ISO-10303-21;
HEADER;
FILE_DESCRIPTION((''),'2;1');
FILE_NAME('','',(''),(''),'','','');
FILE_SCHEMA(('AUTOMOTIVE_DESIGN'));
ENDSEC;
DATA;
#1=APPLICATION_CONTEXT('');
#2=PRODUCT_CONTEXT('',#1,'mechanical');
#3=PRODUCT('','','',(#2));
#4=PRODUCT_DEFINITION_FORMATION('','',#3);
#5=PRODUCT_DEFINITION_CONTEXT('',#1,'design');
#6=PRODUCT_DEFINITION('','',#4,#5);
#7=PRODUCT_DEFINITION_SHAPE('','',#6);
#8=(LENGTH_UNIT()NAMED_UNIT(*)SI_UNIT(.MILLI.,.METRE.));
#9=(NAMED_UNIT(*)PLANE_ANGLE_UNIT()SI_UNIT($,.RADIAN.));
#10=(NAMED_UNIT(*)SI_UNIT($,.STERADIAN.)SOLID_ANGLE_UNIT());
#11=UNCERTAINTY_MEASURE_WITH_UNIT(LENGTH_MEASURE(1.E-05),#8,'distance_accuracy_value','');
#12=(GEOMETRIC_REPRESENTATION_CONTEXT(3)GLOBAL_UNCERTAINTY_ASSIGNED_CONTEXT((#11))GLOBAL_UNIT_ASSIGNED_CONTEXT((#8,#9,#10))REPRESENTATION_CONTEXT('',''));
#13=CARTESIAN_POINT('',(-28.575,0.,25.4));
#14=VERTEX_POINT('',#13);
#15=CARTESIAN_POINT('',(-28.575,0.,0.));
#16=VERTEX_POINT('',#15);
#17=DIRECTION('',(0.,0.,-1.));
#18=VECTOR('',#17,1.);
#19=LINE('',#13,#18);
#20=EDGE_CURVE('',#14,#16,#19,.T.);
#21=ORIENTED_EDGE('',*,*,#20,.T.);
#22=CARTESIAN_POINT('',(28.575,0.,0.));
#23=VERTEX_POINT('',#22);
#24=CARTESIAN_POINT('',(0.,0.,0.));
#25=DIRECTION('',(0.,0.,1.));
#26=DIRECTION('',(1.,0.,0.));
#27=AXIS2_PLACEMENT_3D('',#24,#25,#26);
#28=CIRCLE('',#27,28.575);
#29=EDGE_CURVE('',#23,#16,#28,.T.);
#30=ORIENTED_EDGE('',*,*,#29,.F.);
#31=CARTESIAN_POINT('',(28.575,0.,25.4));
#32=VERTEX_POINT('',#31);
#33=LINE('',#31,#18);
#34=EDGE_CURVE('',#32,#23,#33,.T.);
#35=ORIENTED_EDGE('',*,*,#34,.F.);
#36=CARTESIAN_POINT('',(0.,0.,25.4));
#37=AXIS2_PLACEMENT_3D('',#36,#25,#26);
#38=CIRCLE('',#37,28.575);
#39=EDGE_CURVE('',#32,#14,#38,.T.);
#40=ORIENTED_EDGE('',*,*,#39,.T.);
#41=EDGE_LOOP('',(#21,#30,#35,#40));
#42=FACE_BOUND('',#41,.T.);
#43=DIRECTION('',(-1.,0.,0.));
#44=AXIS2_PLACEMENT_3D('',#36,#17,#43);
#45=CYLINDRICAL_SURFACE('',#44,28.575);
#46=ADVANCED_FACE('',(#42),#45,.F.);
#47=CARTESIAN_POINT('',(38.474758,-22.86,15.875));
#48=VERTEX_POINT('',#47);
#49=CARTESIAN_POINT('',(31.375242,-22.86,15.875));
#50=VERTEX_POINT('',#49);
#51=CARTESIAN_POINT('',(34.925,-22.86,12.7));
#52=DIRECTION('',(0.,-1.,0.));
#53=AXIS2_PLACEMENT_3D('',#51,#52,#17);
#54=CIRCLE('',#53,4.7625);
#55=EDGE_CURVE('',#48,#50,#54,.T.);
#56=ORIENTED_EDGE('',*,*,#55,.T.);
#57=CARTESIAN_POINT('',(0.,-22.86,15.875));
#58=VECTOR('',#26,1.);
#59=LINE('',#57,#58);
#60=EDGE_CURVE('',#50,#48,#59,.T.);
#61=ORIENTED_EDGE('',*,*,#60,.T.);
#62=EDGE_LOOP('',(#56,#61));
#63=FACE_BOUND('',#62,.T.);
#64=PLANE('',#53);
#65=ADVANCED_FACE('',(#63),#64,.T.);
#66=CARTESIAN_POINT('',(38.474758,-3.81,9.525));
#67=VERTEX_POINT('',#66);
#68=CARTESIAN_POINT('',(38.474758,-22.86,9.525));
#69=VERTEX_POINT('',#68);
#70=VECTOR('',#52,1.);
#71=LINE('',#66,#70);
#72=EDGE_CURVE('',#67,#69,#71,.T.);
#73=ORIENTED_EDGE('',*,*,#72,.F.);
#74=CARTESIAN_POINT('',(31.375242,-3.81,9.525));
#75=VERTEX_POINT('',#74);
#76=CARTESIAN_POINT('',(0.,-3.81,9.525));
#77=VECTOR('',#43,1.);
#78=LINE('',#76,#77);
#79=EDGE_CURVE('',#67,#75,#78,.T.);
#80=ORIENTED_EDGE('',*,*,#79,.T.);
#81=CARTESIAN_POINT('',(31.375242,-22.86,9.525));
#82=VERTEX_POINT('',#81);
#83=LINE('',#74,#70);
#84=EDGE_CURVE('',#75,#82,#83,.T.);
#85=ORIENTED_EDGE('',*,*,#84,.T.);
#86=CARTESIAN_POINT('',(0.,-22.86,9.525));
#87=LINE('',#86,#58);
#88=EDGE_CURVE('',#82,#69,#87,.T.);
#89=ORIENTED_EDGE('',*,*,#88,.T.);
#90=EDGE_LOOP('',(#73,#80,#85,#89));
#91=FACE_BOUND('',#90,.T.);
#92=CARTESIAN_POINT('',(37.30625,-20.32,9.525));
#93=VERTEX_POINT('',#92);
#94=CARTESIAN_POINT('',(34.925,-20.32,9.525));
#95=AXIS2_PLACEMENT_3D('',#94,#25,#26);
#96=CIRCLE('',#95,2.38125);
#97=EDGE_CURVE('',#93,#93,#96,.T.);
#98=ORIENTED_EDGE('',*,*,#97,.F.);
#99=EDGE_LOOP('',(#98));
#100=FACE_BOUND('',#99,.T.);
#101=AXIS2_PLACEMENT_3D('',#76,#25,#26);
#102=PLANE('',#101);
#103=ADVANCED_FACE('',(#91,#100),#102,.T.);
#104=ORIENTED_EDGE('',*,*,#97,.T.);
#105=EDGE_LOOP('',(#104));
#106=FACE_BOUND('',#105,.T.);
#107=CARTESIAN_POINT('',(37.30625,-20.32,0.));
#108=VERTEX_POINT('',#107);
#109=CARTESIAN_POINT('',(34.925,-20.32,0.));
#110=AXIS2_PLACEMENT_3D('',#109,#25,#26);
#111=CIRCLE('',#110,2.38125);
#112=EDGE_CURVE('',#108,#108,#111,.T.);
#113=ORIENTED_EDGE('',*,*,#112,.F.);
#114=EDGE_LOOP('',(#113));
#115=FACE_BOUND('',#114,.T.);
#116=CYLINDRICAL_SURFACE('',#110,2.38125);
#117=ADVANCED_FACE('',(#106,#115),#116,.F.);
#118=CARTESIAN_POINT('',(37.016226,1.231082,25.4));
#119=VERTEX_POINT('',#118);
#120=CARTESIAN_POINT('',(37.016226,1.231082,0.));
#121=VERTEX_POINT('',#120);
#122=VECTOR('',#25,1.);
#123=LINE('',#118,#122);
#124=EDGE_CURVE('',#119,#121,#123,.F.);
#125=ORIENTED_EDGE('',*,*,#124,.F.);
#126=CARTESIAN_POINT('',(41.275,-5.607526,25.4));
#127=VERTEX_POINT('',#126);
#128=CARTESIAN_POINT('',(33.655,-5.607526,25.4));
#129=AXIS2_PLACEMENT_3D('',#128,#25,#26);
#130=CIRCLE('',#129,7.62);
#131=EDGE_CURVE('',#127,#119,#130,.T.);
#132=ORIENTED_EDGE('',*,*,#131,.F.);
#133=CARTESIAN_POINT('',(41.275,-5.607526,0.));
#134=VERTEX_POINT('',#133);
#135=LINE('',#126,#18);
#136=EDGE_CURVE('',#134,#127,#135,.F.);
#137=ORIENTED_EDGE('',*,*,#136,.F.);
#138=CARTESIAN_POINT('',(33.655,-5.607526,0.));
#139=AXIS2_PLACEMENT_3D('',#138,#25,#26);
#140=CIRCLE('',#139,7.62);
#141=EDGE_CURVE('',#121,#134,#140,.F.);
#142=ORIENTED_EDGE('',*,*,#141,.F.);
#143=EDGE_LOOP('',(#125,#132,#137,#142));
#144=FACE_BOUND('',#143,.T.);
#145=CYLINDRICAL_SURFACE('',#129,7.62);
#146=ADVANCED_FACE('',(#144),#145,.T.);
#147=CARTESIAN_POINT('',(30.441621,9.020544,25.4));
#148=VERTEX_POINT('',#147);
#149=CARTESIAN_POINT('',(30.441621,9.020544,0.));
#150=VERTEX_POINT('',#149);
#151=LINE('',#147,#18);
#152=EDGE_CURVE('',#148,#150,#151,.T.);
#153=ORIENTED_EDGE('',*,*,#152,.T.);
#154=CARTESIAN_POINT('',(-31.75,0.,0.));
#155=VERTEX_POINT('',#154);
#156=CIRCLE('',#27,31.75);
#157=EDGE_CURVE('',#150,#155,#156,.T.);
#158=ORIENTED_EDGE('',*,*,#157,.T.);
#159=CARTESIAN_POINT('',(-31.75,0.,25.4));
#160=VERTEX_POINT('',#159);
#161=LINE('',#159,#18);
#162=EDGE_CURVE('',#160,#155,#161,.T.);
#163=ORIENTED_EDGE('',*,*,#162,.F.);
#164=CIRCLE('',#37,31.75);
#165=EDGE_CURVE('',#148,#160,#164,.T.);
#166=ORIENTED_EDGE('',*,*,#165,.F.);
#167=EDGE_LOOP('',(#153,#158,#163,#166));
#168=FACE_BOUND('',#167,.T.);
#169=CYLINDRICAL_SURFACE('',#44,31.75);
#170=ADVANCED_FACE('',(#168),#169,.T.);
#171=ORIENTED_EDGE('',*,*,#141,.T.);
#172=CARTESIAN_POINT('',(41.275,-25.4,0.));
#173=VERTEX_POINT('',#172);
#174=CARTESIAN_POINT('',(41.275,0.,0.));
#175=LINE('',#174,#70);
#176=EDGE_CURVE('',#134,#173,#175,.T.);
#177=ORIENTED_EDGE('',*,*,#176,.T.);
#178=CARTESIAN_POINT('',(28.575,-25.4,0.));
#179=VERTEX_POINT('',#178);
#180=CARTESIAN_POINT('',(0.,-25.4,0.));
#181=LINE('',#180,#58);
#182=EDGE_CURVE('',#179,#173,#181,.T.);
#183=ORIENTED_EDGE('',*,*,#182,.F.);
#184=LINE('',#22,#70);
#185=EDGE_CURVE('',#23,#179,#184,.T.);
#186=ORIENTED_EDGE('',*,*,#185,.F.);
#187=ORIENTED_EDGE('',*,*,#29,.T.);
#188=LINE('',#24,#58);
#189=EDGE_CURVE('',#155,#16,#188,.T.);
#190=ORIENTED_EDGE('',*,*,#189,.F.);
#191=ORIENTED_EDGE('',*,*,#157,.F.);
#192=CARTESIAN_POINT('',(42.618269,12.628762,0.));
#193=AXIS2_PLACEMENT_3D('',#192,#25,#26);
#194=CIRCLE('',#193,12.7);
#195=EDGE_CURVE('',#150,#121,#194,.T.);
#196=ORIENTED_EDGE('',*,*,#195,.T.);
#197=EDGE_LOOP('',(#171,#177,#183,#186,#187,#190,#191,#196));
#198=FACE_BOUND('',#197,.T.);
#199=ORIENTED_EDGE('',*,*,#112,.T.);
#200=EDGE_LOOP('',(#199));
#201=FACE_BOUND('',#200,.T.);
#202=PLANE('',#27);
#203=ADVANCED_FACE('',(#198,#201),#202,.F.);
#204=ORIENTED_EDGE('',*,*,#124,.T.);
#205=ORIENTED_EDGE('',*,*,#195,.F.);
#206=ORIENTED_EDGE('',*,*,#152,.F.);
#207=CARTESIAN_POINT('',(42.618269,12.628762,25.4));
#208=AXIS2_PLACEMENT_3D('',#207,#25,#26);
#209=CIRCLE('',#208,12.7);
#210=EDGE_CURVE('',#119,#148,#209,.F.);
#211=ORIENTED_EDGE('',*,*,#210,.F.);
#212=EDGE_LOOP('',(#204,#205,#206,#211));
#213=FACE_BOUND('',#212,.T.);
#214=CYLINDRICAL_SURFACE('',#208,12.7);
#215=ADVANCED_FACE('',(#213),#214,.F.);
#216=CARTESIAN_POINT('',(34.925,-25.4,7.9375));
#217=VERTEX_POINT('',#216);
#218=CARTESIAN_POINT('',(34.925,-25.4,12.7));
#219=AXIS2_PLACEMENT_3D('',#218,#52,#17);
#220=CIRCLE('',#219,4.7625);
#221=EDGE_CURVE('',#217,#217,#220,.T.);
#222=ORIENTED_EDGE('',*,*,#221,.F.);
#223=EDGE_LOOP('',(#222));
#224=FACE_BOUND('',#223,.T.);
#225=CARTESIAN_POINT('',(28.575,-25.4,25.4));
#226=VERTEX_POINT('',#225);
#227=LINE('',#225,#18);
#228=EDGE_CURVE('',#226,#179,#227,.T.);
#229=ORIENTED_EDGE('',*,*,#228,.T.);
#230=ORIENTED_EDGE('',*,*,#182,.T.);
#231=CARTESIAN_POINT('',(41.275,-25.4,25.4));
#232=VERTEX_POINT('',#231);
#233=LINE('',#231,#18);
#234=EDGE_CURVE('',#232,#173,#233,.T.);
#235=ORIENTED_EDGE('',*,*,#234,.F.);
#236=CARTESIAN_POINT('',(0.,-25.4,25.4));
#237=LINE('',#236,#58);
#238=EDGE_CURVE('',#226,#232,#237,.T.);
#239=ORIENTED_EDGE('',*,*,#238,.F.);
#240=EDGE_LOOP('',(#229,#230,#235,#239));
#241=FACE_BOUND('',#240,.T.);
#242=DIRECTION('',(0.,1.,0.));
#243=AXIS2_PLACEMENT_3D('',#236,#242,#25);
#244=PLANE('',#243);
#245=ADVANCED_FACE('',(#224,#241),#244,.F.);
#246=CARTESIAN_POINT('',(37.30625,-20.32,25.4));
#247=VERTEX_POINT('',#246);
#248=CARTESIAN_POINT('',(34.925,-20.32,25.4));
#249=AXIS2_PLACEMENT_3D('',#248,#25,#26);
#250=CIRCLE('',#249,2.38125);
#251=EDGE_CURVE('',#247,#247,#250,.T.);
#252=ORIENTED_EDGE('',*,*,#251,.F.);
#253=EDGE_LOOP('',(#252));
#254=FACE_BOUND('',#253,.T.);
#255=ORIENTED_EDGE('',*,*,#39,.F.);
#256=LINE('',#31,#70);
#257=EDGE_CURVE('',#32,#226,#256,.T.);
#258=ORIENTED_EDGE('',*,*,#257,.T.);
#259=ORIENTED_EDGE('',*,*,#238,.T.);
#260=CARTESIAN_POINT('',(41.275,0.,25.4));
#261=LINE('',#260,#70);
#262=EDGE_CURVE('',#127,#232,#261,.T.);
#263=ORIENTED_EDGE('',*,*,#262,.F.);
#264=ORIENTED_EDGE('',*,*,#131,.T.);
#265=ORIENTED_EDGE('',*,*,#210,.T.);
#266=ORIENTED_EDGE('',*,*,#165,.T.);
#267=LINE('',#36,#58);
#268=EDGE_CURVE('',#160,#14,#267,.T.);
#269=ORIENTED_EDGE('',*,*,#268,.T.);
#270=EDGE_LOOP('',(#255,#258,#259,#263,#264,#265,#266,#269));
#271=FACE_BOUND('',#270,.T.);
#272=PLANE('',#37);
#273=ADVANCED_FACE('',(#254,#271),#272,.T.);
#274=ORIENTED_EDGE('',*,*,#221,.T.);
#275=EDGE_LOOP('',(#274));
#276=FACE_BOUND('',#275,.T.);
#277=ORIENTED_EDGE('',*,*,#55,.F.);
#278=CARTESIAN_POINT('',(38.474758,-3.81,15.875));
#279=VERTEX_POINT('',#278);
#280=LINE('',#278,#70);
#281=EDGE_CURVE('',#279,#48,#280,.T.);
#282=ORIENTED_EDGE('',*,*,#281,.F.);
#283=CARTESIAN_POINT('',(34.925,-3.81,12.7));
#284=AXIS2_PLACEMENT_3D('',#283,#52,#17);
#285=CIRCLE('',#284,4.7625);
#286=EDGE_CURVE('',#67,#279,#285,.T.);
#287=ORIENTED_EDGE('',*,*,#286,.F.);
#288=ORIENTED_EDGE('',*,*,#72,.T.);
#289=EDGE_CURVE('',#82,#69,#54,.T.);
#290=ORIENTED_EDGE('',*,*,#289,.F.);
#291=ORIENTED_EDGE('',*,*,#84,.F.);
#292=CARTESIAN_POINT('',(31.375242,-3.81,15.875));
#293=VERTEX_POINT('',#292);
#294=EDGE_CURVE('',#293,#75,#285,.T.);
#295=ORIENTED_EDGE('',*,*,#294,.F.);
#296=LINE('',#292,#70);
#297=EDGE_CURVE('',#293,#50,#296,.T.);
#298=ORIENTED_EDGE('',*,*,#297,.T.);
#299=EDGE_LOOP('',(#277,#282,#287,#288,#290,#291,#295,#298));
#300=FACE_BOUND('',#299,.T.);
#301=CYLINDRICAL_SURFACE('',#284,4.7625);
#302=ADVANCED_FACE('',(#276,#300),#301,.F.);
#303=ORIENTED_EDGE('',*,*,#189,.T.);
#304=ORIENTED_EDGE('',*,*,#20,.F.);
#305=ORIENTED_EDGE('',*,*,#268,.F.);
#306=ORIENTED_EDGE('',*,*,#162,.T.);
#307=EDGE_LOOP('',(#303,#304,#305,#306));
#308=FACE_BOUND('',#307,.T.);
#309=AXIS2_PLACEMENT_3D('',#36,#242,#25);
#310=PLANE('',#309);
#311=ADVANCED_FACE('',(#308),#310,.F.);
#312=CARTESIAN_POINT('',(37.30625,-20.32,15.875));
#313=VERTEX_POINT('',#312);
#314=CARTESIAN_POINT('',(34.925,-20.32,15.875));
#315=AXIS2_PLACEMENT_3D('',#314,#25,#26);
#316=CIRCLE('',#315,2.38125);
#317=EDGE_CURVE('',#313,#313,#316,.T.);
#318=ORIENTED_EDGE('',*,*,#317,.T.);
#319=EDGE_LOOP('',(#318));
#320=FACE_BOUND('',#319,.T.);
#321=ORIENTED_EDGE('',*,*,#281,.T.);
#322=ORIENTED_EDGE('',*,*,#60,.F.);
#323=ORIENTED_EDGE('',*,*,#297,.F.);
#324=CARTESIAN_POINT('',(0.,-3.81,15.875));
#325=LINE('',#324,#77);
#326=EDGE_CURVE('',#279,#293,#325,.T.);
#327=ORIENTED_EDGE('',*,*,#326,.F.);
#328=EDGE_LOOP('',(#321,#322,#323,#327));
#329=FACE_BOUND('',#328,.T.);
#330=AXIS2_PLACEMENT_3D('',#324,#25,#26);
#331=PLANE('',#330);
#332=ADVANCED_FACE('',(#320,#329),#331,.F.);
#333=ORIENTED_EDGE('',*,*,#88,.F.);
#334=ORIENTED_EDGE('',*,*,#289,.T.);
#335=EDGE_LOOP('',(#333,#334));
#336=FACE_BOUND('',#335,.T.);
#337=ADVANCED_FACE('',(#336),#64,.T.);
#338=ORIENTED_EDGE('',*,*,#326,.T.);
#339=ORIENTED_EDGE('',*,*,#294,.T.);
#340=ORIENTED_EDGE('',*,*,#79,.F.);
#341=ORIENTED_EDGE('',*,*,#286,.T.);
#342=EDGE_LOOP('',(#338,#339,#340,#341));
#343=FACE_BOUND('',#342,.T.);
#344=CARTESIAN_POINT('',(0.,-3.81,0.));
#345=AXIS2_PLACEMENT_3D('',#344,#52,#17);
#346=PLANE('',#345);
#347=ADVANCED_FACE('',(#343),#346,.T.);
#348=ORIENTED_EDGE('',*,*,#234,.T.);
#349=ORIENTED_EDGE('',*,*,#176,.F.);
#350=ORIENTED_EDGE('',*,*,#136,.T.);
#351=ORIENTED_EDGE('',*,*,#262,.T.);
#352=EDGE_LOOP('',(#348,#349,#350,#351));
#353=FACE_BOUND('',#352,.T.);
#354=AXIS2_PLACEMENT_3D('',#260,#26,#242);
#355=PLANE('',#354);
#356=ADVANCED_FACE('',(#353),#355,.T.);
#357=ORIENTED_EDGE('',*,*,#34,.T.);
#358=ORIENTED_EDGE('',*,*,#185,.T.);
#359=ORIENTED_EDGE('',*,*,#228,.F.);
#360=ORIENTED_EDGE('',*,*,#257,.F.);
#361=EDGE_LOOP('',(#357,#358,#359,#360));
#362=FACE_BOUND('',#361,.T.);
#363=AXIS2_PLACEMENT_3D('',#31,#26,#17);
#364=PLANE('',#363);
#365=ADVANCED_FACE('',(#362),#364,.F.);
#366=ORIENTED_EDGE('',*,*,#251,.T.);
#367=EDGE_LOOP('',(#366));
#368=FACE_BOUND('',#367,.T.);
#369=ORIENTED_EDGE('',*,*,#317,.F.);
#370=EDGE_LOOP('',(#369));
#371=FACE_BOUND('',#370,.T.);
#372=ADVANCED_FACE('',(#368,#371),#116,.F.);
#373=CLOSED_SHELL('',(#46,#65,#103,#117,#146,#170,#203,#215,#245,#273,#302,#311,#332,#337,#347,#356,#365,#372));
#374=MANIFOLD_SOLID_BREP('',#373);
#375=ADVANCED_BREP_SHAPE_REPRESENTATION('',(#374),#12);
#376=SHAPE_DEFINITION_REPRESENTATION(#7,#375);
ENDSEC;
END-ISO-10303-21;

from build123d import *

# Parameters (mm, degrees)
BOSS_EXTRUDE1_DEPTH = 25.4
FILLET1_R           = 12.7
FILLET2_R           = 7.62
CUT_EXTRUDE1_DEPTH  = 21.59
SKETCH3_R           = 4.7625
CUT_EXTRUDE2_DEPTH  = 2.54
SKETCH4_R           = 2.38125
CUT_EXTRUDE3_DEPTH  = 58.938313101


with BuildPart() as part:
    # Sketch1 → Boss-Extrude1 (new body)
    with BuildSketch(Plane.XY):
        with BuildLine():
            ThreePointArc((-28.575, 0), (0, 28.575), (28.575, 0))
            Line((28.575, 0), (28.575, -25.4))
            Line((28.575, -25.4), (41.275, -25.4))
            Line((41.275, -25.4), (41.275, 0))
            Line((41.275, 0), (31.75, 0))
            ThreePointArc((31.75, 0), (0, 31.75), (-31.75, 0))
            Line((-31.75, 0), (-28.575, 0))
        make_face()
    extrude(amount=BOSS_EXTRUDE1_DEPTH)

    # Fillet1
    # the kernel refuses this fillet: 12.7 mm, written as the material it adds along each edge
    with BuildSketch(Plane(origin=(31.75, 0, 0), x_dir=(1, 0, 0), z_dir=(0, 0, 1))) as fillet1_piece_1:
        with BuildLine():
            CenterArc((10.868269231, 12.628761926), FILLET1_R, 196.505753727, 67.422759238)
            Line((-1.308379121, 9.020544233), (-1.551912088, 8.948379879))
            ThreePointArc((-1.551912088, 8.948379879), (-0.580166885, 4.521008688), (-0.254, 0))
            Line((-0.254, 0), (0, -0.254))
            ThreePointArc((0, -0.254), (4.7625, -0.254), (9.498134615, -0.252575239))
            Line((9.498134615, -0.252575239), (9.525, 0))
        make_face()
    extrude(amount=25.4)

    # Fillet2
    fillet2_edges = [part.edges().sort_by_distance(p)[0] for p in [
        (41.275, 0, 12.7),
    ]]
    fillet(fillet2_edges, radius=FILLET2_R)

    # Sketch2 → Cut-Extrude1 (cut)
    with BuildSketch(Plane(origin=(0, -25.4, 0), x_dir=(-1, 0, 0), z_dir=(0, -1, 0))):
        with BuildLine():
            ThreePointArc((-38.474757914, -9.525), (-39.6875, -12.7), (-38.474757914, -15.875))
            Line((-38.474757914, -15.875), (-31.375242086, -15.875))
            ThreePointArc((-31.375242086, -15.875), (-30.47600414, -14.399365203), (-30.1625, -12.7))
            ThreePointArc((-30.1625, -12.7), (-30.47600414, -11.000634797), (-31.375242086, -9.525))
            Line((-31.375242086, -9.525), (-38.474757914, -9.525))
        make_face()
    extrude(amount=-CUT_EXTRUDE1_DEPTH, mode=Mode.SUBTRACT)

    # Sketch3 → Cut-Extrude2 (cut)
    with BuildSketch(Plane.XZ.offset(25.4)):
        with Locations(Location((34.925, 12.7, 0), (0, 0, 270))):
            Circle(SKETCH3_R)
    extrude(amount=-CUT_EXTRUDE2_DEPTH, mode=Mode.SUBTRACT)

    # Sketch4 → Cut-Extrude3 (cut, through all)
    with BuildSketch(Plane.XY.offset(25.4)):
        with Locations((34.925, -20.32)):
            Circle(SKETCH4_R)
    extrude(amount=-CUT_EXTRUDE3_DEPTH, mode=Mode.SUBTRACT)


solid = part.part
